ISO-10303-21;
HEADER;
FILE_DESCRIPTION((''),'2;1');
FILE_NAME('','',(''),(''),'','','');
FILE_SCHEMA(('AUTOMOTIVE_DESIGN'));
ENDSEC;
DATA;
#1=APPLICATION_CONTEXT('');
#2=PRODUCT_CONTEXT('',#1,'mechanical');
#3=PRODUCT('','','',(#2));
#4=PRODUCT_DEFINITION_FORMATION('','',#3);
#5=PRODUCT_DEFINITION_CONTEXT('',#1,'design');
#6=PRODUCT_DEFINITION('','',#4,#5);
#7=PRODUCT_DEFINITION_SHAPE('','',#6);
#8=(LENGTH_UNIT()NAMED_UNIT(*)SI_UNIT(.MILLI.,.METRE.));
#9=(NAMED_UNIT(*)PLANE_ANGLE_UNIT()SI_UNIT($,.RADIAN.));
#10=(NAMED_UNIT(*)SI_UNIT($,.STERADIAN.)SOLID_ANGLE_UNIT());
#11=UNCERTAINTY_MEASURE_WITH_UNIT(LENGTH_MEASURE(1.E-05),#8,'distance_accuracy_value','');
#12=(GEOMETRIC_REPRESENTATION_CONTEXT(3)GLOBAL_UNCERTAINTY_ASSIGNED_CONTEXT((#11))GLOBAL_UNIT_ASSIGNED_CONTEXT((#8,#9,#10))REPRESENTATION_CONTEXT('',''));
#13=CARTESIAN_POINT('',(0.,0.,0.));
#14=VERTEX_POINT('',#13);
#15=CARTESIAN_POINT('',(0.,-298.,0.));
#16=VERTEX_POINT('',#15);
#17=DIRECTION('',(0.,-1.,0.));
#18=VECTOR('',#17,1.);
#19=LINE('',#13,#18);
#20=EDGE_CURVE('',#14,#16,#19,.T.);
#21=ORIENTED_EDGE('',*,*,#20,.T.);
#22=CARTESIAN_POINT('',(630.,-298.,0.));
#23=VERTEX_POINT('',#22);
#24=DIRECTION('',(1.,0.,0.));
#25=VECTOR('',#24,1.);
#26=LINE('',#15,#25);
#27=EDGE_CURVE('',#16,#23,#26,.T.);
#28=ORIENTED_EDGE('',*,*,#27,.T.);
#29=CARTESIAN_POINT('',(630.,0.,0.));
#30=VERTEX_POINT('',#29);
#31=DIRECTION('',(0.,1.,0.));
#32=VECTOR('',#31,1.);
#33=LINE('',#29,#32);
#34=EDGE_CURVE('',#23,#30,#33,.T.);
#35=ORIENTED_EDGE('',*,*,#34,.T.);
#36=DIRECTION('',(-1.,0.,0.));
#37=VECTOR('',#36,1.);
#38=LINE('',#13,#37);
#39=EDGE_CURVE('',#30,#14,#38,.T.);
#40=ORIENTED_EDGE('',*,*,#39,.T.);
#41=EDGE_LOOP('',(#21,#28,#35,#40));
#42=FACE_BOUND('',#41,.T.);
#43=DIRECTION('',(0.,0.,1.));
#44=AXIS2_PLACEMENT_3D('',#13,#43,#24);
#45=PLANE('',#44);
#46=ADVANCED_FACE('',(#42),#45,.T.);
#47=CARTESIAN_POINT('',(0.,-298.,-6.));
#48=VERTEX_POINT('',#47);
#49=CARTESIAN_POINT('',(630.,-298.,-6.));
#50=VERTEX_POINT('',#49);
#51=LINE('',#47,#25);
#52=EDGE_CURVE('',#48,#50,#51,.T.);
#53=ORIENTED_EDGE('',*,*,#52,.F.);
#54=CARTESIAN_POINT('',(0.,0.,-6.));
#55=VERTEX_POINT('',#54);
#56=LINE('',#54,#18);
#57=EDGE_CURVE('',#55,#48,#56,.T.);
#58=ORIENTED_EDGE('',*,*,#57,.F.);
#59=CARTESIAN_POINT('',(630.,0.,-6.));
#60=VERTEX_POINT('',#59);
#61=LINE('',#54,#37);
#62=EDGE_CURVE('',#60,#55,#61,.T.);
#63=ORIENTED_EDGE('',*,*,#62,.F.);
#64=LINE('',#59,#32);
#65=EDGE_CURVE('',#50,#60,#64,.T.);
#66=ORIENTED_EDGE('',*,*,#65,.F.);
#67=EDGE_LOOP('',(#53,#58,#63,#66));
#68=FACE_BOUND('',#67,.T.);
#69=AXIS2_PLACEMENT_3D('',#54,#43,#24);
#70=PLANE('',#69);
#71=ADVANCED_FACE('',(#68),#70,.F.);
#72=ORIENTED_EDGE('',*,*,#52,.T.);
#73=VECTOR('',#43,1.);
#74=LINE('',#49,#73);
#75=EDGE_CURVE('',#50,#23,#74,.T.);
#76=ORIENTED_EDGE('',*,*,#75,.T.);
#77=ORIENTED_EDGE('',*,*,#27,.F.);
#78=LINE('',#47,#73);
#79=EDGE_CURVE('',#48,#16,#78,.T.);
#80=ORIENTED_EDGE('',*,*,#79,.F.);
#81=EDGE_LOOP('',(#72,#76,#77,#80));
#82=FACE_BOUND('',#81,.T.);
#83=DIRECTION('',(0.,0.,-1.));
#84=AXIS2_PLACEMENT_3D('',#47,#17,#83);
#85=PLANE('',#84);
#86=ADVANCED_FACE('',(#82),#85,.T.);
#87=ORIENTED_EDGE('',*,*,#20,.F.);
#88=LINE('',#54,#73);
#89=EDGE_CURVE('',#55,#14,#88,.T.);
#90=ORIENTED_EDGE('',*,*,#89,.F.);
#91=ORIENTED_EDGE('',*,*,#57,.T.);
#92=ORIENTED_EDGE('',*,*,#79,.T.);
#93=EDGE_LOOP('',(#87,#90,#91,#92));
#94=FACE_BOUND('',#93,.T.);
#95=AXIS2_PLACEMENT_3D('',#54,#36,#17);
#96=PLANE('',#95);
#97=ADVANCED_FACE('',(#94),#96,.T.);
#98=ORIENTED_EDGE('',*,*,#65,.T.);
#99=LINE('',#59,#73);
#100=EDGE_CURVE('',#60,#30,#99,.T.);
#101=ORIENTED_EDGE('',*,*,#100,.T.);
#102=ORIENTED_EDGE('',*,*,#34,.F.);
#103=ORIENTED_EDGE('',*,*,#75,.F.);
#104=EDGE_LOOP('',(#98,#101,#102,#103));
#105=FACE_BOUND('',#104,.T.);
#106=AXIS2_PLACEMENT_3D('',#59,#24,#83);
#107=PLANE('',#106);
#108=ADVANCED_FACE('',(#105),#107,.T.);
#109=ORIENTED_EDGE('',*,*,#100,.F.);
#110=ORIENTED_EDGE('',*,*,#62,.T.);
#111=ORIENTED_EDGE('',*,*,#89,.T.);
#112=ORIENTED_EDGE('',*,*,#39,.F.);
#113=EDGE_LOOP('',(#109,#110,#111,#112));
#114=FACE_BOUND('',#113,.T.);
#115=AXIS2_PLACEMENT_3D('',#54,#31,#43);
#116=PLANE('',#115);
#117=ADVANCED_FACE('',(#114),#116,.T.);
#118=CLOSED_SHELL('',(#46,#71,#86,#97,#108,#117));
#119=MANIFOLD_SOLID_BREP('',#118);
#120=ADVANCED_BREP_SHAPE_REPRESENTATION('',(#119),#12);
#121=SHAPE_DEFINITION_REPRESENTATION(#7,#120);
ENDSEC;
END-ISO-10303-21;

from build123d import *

# Parameters (mm, degrees)
IZIM1_W            = 630
IZIM1_H            = 298
TABAN_FLAN_1_DEPTH = 6


# Sheet-metal steps are written as plain solids
with BuildPart() as part:
    # Çizim1 → Taban-Flanş1 (new body)
    with BuildSketch(Plane.XY):
        with Locations((315, -149)):
            Rectangle(IZIM1_W, IZIM1_H)
    extrude(amount=-TABAN_FLAN_1_DEPTH)


solid = part.part
